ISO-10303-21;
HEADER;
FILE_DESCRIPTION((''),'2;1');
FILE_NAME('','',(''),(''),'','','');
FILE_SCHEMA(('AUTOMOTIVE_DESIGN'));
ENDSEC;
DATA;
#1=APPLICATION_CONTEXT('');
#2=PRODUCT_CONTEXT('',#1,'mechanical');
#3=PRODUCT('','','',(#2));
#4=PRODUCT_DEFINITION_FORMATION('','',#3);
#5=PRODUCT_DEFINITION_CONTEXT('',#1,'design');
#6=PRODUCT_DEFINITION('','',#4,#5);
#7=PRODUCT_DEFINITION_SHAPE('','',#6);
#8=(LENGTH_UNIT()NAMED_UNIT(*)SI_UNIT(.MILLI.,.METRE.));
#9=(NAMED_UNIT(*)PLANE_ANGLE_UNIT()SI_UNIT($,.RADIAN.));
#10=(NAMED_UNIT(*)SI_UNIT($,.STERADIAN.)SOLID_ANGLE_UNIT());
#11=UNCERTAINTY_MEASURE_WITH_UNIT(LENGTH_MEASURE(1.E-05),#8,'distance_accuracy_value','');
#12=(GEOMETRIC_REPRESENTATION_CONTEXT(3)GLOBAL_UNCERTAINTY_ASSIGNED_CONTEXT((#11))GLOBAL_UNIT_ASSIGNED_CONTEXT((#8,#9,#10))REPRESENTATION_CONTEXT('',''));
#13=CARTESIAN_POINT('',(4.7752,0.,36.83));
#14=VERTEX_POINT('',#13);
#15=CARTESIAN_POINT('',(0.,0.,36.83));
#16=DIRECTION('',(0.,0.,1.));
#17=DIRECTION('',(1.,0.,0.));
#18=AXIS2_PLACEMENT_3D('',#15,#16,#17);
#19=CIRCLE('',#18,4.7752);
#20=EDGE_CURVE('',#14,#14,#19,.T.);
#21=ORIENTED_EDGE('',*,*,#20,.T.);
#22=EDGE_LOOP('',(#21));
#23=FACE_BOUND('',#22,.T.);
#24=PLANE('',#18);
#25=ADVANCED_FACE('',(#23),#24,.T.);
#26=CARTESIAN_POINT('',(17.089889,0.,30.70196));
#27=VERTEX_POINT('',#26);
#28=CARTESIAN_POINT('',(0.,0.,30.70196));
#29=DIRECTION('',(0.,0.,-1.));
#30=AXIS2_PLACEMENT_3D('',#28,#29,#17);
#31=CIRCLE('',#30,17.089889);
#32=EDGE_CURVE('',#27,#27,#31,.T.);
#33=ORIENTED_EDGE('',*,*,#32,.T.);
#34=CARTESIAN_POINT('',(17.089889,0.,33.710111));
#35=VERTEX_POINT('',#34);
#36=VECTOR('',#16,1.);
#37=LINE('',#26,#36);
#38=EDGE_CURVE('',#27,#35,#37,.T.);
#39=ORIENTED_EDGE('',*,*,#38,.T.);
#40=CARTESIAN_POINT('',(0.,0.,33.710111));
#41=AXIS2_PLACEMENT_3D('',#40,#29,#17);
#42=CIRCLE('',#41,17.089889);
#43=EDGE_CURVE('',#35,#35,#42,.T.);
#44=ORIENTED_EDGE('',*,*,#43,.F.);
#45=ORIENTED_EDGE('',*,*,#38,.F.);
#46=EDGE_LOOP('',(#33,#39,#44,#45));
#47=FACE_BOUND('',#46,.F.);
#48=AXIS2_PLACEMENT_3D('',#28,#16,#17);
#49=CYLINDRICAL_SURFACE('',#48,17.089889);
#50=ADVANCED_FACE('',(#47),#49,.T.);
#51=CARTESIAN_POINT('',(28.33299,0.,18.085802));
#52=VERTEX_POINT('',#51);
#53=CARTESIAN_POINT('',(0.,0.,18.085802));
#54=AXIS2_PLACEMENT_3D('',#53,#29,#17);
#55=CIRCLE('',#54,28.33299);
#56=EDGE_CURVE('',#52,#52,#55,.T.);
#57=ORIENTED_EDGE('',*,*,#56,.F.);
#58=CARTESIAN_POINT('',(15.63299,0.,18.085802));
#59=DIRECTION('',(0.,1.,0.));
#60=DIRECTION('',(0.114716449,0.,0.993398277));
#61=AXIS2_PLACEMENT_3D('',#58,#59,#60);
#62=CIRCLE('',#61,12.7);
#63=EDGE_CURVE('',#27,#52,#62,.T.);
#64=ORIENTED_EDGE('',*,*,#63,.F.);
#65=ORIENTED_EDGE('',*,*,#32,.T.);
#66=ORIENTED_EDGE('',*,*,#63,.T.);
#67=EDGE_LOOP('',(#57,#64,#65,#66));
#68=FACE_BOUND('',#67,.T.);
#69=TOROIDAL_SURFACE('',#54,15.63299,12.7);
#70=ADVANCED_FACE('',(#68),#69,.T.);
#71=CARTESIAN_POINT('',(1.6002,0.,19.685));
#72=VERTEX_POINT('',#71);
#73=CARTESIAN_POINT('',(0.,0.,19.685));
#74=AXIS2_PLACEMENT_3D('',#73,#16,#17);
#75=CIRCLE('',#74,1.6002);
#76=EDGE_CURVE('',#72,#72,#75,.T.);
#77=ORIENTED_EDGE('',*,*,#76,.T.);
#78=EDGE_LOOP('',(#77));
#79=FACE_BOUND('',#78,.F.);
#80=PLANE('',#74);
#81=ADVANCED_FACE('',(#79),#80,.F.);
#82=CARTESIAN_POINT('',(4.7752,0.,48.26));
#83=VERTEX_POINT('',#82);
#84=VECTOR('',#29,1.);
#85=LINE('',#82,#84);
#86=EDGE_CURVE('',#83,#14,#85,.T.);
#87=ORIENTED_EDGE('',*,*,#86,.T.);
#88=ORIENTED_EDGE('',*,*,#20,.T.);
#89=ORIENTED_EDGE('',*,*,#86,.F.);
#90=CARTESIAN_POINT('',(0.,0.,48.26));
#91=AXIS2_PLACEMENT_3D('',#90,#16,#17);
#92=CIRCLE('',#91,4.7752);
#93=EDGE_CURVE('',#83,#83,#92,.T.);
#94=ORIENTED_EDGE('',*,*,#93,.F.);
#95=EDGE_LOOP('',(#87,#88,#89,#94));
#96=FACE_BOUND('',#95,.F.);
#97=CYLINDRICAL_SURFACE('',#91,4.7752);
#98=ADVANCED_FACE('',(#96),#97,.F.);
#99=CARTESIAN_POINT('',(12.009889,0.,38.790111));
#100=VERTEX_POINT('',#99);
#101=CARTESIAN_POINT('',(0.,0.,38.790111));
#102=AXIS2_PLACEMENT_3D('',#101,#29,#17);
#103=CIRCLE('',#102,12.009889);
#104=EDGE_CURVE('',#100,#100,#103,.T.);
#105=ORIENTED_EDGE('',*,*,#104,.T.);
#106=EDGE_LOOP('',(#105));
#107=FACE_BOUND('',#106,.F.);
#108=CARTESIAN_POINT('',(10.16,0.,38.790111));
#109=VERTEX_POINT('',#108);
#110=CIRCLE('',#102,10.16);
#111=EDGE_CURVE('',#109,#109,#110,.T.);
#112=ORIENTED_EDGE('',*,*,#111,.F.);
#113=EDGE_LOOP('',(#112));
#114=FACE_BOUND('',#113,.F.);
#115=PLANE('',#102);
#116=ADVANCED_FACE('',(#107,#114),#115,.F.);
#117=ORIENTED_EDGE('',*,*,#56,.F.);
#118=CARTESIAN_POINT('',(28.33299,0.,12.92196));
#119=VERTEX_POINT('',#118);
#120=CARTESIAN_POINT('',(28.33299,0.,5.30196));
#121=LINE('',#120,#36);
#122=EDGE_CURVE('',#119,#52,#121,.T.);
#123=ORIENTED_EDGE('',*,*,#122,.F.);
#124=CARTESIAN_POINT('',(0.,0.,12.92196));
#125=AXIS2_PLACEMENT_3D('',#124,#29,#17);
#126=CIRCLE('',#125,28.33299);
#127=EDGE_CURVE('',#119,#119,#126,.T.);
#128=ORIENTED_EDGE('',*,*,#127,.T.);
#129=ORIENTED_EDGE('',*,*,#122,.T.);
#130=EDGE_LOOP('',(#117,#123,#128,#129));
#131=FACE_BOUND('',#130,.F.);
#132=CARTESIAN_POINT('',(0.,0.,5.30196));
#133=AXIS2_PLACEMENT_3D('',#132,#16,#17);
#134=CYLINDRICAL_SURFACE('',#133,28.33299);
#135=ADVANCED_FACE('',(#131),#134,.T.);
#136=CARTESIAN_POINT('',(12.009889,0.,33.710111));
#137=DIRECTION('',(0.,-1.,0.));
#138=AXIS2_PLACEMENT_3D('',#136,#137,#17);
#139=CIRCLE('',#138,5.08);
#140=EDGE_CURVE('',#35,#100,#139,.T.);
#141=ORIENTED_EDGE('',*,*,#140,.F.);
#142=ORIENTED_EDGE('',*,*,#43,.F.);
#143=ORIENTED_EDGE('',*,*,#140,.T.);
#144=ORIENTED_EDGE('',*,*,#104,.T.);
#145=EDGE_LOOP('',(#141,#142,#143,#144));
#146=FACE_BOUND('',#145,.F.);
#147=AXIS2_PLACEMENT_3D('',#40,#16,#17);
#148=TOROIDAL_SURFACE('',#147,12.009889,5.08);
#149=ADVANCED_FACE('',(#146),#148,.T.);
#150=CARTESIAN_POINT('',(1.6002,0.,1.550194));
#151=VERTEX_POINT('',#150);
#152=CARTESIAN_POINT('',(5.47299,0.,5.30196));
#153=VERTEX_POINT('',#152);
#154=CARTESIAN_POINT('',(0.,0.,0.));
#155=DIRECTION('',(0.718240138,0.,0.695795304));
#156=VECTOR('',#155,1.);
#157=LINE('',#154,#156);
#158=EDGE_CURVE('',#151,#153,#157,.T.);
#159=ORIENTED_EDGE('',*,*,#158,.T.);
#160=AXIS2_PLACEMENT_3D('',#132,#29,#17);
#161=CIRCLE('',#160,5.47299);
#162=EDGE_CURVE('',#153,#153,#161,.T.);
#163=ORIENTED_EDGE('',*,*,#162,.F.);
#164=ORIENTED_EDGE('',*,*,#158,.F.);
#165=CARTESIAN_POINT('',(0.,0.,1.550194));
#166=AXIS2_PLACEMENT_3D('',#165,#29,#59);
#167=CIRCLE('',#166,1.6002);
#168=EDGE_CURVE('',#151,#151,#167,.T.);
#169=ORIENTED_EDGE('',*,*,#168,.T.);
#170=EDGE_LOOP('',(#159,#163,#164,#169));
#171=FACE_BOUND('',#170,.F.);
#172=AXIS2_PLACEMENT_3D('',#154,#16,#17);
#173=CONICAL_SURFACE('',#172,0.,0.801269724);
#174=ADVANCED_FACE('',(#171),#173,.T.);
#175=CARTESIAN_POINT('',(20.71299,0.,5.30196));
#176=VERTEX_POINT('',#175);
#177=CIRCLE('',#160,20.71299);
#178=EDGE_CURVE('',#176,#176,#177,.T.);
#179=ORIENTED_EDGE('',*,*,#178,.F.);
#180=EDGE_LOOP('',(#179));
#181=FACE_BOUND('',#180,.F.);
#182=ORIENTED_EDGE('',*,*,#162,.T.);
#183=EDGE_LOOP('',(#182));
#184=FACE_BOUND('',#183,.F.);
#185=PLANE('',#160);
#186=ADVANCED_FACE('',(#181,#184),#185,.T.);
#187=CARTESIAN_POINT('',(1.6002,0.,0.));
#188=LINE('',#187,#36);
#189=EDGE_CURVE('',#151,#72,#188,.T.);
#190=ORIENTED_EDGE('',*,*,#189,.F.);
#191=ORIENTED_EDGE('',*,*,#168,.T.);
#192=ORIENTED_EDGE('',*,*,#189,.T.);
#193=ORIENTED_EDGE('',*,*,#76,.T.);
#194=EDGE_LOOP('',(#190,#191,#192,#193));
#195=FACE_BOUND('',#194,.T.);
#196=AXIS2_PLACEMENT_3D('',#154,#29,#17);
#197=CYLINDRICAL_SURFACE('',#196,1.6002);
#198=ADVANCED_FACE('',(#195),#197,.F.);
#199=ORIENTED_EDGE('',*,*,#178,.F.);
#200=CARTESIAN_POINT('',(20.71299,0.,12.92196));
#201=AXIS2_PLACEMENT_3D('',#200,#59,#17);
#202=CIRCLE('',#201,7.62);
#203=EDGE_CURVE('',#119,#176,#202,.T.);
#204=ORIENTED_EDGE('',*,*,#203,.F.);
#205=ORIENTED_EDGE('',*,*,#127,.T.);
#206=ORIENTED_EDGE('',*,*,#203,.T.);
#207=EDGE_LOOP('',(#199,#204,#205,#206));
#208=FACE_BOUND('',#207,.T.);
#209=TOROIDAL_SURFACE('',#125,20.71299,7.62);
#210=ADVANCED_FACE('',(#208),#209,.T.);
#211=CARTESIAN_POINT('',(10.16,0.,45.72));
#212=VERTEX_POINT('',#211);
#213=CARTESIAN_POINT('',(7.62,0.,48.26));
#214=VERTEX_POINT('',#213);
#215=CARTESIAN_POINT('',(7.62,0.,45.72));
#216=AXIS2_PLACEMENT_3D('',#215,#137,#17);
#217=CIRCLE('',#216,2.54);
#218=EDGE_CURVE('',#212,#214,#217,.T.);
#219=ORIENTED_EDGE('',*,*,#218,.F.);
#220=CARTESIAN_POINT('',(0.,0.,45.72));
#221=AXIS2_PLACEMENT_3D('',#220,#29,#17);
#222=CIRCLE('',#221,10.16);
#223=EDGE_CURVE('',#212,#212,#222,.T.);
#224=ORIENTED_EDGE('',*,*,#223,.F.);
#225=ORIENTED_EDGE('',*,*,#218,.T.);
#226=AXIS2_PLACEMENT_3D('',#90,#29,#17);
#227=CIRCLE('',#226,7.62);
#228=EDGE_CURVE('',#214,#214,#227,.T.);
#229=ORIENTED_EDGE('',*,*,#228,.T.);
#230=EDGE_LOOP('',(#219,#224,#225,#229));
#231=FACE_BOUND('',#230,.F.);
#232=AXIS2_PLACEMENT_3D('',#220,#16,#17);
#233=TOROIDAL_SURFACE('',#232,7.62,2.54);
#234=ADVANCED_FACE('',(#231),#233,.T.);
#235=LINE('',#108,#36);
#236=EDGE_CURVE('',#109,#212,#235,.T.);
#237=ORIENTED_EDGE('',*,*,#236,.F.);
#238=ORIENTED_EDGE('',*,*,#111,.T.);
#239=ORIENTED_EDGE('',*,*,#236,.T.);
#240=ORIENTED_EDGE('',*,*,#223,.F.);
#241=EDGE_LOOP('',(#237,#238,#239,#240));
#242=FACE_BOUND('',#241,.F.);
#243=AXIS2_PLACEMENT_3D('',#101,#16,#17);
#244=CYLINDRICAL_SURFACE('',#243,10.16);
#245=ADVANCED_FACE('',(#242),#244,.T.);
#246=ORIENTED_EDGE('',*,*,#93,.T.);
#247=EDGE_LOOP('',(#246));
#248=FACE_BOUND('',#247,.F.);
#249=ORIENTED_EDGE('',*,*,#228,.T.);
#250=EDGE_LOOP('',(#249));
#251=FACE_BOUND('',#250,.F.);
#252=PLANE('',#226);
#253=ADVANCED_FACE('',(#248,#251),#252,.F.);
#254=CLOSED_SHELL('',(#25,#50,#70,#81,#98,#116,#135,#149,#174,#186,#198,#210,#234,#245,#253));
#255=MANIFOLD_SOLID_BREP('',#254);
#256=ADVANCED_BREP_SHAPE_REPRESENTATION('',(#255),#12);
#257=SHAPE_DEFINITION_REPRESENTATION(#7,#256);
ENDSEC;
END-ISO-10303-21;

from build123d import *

# Parameters (mm, degrees)
F2_R     = 5.08
F4_R     = 7.62
F5_R     = 2.54
F6_R     = 4.7752
F7_DEPTH = 11.43
F8_R     = 1.6002
F9_DEPTH = 19.685


# Not quite as in the source:
# - a fillet or chamfer that OpenCascade refuses, or shapes differently, is made with other operations: its cross-section is extruded or revolved along the edge and cut away or added


with BuildPart() as f1:
    # F0 (on Front) → F1 (revolve)
    with BuildSketch(Plane.XZ):
        Polygon((0, 48.26), (0, 0), (5.4729898483, 5.3019602149), (28.3329898483, 5.3019602149), (28.3329898483, 30.7019602149), (17.0898887448, 30.7019602149), (17.0898887448, 38.7901112552), (10.16, 38.7901112552), (10.16, 48.26), align=None)
    revolve(axis=Axis((0, 0, 24.13), (0, 0, -1)))

    # F2
    f2_edges = [f1.edges().sort_by_distance(p)[0] for p in [
        (-17.089889, 0, 38.790111),
    ]]
    fillet(f2_edges, radius=F2_R)

    # F3: fillet of radius 12.7 on 1 edges, made by hand

    # F3_s1 → F3_t2 (revolve, cut)
    with BuildSketch(Plane.XZ):
        with BuildLine():
            ThreePointArc((17.0898887448, 30.7019602149), (25.1143562052, 26.5352808999), (28.3329898483, 18.085802099))
            Line((28.3329898483, 18.085802099), (28.3329898483, 30.7019602149))
            Line((28.3329898483, 30.7019602149), (17.0898887448, 30.7019602149))
        make_face()
    revolve(axis=Axis((0, 0, 30.7019602149), (0, 0, -1)), mode=Mode.SUBTRACT)

    # F4
    f4_edges = [f1.edges().sort_by_distance(p)[0] for p in [
        (-28.33299, 0, 5.30196),
    ]]
    fillet(f4_edges, radius=F4_R)

    # F5
    f5_edges = [f1.edges().sort_by_distance(p)[0] for p in [
        (-10.16, 0, 48.26),
    ]]
    fillet(f5_edges, radius=F5_R)

    # F6 (on face) → F7 (cut)
    with BuildSketch(Plane.XY.offset(48.26)):
        Circle(F6_R)
    extrude(amount=-F7_DEPTH, mode=Mode.SUBTRACT)

    # F8 (on Top) → F9 (cut)
    with BuildSketch(Plane.XY):
        Circle(F8_R)
    extrude(amount=F9_DEPTH, mode=Mode.SUBTRACT)


solid = f1.part
